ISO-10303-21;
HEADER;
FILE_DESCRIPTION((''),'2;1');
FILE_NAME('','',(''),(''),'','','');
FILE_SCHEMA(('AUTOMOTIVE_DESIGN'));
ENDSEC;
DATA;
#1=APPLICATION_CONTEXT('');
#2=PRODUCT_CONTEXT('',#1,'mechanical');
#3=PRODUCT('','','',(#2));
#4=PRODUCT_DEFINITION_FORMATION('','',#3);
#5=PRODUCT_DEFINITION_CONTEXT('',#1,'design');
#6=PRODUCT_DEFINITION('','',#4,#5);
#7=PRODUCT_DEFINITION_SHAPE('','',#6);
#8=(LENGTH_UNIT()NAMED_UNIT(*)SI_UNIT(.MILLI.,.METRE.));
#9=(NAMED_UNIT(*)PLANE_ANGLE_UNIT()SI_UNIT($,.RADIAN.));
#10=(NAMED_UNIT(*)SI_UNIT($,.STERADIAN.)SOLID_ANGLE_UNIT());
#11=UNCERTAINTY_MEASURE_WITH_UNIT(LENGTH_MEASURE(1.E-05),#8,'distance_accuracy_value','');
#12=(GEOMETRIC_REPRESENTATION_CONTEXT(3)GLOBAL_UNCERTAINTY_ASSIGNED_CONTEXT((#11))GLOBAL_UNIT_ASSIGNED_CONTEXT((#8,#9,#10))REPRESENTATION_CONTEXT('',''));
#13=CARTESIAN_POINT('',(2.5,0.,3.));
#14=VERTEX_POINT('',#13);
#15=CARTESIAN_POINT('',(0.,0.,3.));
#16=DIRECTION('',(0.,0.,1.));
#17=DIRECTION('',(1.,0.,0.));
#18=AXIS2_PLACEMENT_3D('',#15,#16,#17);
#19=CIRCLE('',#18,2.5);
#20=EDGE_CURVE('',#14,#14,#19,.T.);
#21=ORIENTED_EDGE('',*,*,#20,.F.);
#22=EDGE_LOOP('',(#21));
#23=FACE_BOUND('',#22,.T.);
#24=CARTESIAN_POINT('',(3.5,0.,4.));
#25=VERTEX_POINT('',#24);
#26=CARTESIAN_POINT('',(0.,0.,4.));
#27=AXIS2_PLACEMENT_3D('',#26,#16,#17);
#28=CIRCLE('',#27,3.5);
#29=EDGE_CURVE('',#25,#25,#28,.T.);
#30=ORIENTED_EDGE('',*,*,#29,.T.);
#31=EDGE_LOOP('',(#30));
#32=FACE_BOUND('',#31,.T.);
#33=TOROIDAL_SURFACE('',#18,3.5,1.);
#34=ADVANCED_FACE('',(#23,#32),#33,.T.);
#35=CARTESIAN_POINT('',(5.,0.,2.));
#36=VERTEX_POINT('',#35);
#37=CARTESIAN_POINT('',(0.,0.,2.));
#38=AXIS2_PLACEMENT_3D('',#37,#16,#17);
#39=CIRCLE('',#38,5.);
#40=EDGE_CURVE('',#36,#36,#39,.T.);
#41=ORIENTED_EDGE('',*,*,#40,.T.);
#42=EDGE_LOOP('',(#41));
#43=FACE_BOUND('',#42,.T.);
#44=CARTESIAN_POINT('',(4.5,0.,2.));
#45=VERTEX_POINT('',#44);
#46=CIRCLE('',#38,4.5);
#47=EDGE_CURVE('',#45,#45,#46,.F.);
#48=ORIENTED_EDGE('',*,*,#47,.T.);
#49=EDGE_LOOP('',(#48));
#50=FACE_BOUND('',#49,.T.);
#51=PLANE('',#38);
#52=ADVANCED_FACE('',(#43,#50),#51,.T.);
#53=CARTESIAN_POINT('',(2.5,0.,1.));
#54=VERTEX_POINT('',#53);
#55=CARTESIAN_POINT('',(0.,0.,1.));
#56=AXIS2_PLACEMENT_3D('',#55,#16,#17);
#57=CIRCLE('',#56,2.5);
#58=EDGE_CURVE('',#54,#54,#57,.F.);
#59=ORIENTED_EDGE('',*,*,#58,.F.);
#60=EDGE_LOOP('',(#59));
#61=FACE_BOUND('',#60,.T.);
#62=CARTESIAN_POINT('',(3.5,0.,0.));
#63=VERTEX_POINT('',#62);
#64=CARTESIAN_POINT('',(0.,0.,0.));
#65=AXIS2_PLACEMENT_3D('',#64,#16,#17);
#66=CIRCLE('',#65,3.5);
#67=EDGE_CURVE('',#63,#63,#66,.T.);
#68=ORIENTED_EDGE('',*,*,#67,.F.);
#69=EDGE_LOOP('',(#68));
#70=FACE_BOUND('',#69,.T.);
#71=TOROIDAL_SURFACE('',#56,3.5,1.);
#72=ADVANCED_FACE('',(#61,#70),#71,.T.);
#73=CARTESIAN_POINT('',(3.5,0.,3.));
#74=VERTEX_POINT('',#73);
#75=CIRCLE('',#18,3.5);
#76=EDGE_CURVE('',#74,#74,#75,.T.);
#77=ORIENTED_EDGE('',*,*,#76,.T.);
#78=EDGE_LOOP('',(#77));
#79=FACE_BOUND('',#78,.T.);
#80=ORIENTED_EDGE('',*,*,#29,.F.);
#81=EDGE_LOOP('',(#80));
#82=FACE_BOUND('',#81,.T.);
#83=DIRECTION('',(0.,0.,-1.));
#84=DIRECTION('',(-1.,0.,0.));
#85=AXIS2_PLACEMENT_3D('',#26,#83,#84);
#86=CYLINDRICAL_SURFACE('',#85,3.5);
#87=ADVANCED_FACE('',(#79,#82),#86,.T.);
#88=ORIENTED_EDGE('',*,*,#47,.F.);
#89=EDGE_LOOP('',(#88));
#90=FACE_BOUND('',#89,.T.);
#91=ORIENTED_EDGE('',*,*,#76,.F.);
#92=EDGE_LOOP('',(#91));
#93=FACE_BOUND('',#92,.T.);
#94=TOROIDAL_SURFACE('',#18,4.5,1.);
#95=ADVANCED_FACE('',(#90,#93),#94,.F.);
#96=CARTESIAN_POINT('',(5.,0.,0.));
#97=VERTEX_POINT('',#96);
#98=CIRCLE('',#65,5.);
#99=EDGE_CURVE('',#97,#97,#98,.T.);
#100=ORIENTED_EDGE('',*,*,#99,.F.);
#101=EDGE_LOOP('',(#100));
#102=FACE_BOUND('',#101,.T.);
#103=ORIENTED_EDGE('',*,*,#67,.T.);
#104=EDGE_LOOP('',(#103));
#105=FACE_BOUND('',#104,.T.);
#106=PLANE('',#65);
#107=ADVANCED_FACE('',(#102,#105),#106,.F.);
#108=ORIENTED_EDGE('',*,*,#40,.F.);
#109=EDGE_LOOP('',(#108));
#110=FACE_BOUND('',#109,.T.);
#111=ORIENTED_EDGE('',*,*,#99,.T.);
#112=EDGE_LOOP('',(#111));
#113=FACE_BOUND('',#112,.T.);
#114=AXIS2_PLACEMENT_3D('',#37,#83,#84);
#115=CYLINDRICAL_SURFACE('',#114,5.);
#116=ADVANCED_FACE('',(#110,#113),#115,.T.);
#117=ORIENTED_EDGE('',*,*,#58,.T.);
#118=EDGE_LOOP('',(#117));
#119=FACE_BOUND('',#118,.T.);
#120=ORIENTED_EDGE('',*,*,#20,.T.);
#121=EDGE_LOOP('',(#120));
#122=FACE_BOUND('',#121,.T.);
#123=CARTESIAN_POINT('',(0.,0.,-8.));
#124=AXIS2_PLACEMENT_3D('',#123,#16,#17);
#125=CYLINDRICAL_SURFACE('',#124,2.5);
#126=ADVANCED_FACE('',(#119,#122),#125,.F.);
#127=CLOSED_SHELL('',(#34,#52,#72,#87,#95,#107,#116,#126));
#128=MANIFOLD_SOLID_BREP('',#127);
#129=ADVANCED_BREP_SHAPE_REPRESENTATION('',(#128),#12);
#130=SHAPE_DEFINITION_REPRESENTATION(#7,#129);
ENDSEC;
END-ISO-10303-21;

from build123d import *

# Parameters (mm, degrees)
SKETCH1_R           = 5
BOSS_EXTRUDE1_DEPTH = 2
SKETCH2_R           = 2.5
CUT_EXTRUDE1_DEPTH  = 10
SKETCH3_R           = 3.5
BOSS_EXTRUDE2_DEPTH = 2
CUT_EXTRUDE2_START  = -3
SKETCH4_R           = 2.5
CUT_EXTRUDE2_DEPTH  = 3
FILLET1_R           = 1
FILLET2_R           = 1
FILLET3_R           = 1


with BuildPart() as part:
    # Sketch1 → Boss-Extrude1 (new body)
    with BuildSketch(Plane.XY):
        Circle(SKETCH1_R)
    extrude(amount=BOSS_EXTRUDE1_DEPTH)

    # Sketch2 → Cut-Extrude1 (cut)
    with BuildSketch(Plane.XY.offset(2)):
        Circle(SKETCH2_R)
    extrude(amount=-CUT_EXTRUDE1_DEPTH, mode=Mode.SUBTRACT)

    # Sketch3 → Boss-Extrude2 (add)
    with BuildSketch(Plane.XY.offset(2)):
        Circle(SKETCH3_R)
    extrude(amount=BOSS_EXTRUDE2_DEPTH)

    # Sketch4 → Cut-Extrude2 (cut)
    with BuildSketch(Plane(origin=(0, 0, 2), x_dir=(-1, 0, 0), z_dir=(0, 0, -1)).offset(CUT_EXTRUDE2_START)):
        with Locations(Location((0, 0, 0), (0, 0, 180))):
            Circle(SKETCH4_R)
    extrude(amount=CUT_EXTRUDE2_DEPTH, mode=Mode.SUBTRACT)

    # Fillet1
    fillet1_edges = [part.edges().sort_by_distance(p)[0] for p in [
        (-2.5, 0, 0),
    ]]
    fillet(fillet1_edges, radius=FILLET1_R)

    # Fillet2
    fillet2_edges = [part.edges().sort_by_distance(p)[0] for p in [
        (-2.5, 0, 4),
    ]]
    fillet(fillet2_edges, radius=FILLET2_R - 0.0001)  # a hair under: the kernel refuses the full size

    # Fillet3
    fillet3_edges = [part.edges().sort_by_distance(p)[0] for p in [
        (-3.5, 0, 2),
    ]]
    fillet(fillet3_edges, radius=FILLET3_R)


solid = part.part
